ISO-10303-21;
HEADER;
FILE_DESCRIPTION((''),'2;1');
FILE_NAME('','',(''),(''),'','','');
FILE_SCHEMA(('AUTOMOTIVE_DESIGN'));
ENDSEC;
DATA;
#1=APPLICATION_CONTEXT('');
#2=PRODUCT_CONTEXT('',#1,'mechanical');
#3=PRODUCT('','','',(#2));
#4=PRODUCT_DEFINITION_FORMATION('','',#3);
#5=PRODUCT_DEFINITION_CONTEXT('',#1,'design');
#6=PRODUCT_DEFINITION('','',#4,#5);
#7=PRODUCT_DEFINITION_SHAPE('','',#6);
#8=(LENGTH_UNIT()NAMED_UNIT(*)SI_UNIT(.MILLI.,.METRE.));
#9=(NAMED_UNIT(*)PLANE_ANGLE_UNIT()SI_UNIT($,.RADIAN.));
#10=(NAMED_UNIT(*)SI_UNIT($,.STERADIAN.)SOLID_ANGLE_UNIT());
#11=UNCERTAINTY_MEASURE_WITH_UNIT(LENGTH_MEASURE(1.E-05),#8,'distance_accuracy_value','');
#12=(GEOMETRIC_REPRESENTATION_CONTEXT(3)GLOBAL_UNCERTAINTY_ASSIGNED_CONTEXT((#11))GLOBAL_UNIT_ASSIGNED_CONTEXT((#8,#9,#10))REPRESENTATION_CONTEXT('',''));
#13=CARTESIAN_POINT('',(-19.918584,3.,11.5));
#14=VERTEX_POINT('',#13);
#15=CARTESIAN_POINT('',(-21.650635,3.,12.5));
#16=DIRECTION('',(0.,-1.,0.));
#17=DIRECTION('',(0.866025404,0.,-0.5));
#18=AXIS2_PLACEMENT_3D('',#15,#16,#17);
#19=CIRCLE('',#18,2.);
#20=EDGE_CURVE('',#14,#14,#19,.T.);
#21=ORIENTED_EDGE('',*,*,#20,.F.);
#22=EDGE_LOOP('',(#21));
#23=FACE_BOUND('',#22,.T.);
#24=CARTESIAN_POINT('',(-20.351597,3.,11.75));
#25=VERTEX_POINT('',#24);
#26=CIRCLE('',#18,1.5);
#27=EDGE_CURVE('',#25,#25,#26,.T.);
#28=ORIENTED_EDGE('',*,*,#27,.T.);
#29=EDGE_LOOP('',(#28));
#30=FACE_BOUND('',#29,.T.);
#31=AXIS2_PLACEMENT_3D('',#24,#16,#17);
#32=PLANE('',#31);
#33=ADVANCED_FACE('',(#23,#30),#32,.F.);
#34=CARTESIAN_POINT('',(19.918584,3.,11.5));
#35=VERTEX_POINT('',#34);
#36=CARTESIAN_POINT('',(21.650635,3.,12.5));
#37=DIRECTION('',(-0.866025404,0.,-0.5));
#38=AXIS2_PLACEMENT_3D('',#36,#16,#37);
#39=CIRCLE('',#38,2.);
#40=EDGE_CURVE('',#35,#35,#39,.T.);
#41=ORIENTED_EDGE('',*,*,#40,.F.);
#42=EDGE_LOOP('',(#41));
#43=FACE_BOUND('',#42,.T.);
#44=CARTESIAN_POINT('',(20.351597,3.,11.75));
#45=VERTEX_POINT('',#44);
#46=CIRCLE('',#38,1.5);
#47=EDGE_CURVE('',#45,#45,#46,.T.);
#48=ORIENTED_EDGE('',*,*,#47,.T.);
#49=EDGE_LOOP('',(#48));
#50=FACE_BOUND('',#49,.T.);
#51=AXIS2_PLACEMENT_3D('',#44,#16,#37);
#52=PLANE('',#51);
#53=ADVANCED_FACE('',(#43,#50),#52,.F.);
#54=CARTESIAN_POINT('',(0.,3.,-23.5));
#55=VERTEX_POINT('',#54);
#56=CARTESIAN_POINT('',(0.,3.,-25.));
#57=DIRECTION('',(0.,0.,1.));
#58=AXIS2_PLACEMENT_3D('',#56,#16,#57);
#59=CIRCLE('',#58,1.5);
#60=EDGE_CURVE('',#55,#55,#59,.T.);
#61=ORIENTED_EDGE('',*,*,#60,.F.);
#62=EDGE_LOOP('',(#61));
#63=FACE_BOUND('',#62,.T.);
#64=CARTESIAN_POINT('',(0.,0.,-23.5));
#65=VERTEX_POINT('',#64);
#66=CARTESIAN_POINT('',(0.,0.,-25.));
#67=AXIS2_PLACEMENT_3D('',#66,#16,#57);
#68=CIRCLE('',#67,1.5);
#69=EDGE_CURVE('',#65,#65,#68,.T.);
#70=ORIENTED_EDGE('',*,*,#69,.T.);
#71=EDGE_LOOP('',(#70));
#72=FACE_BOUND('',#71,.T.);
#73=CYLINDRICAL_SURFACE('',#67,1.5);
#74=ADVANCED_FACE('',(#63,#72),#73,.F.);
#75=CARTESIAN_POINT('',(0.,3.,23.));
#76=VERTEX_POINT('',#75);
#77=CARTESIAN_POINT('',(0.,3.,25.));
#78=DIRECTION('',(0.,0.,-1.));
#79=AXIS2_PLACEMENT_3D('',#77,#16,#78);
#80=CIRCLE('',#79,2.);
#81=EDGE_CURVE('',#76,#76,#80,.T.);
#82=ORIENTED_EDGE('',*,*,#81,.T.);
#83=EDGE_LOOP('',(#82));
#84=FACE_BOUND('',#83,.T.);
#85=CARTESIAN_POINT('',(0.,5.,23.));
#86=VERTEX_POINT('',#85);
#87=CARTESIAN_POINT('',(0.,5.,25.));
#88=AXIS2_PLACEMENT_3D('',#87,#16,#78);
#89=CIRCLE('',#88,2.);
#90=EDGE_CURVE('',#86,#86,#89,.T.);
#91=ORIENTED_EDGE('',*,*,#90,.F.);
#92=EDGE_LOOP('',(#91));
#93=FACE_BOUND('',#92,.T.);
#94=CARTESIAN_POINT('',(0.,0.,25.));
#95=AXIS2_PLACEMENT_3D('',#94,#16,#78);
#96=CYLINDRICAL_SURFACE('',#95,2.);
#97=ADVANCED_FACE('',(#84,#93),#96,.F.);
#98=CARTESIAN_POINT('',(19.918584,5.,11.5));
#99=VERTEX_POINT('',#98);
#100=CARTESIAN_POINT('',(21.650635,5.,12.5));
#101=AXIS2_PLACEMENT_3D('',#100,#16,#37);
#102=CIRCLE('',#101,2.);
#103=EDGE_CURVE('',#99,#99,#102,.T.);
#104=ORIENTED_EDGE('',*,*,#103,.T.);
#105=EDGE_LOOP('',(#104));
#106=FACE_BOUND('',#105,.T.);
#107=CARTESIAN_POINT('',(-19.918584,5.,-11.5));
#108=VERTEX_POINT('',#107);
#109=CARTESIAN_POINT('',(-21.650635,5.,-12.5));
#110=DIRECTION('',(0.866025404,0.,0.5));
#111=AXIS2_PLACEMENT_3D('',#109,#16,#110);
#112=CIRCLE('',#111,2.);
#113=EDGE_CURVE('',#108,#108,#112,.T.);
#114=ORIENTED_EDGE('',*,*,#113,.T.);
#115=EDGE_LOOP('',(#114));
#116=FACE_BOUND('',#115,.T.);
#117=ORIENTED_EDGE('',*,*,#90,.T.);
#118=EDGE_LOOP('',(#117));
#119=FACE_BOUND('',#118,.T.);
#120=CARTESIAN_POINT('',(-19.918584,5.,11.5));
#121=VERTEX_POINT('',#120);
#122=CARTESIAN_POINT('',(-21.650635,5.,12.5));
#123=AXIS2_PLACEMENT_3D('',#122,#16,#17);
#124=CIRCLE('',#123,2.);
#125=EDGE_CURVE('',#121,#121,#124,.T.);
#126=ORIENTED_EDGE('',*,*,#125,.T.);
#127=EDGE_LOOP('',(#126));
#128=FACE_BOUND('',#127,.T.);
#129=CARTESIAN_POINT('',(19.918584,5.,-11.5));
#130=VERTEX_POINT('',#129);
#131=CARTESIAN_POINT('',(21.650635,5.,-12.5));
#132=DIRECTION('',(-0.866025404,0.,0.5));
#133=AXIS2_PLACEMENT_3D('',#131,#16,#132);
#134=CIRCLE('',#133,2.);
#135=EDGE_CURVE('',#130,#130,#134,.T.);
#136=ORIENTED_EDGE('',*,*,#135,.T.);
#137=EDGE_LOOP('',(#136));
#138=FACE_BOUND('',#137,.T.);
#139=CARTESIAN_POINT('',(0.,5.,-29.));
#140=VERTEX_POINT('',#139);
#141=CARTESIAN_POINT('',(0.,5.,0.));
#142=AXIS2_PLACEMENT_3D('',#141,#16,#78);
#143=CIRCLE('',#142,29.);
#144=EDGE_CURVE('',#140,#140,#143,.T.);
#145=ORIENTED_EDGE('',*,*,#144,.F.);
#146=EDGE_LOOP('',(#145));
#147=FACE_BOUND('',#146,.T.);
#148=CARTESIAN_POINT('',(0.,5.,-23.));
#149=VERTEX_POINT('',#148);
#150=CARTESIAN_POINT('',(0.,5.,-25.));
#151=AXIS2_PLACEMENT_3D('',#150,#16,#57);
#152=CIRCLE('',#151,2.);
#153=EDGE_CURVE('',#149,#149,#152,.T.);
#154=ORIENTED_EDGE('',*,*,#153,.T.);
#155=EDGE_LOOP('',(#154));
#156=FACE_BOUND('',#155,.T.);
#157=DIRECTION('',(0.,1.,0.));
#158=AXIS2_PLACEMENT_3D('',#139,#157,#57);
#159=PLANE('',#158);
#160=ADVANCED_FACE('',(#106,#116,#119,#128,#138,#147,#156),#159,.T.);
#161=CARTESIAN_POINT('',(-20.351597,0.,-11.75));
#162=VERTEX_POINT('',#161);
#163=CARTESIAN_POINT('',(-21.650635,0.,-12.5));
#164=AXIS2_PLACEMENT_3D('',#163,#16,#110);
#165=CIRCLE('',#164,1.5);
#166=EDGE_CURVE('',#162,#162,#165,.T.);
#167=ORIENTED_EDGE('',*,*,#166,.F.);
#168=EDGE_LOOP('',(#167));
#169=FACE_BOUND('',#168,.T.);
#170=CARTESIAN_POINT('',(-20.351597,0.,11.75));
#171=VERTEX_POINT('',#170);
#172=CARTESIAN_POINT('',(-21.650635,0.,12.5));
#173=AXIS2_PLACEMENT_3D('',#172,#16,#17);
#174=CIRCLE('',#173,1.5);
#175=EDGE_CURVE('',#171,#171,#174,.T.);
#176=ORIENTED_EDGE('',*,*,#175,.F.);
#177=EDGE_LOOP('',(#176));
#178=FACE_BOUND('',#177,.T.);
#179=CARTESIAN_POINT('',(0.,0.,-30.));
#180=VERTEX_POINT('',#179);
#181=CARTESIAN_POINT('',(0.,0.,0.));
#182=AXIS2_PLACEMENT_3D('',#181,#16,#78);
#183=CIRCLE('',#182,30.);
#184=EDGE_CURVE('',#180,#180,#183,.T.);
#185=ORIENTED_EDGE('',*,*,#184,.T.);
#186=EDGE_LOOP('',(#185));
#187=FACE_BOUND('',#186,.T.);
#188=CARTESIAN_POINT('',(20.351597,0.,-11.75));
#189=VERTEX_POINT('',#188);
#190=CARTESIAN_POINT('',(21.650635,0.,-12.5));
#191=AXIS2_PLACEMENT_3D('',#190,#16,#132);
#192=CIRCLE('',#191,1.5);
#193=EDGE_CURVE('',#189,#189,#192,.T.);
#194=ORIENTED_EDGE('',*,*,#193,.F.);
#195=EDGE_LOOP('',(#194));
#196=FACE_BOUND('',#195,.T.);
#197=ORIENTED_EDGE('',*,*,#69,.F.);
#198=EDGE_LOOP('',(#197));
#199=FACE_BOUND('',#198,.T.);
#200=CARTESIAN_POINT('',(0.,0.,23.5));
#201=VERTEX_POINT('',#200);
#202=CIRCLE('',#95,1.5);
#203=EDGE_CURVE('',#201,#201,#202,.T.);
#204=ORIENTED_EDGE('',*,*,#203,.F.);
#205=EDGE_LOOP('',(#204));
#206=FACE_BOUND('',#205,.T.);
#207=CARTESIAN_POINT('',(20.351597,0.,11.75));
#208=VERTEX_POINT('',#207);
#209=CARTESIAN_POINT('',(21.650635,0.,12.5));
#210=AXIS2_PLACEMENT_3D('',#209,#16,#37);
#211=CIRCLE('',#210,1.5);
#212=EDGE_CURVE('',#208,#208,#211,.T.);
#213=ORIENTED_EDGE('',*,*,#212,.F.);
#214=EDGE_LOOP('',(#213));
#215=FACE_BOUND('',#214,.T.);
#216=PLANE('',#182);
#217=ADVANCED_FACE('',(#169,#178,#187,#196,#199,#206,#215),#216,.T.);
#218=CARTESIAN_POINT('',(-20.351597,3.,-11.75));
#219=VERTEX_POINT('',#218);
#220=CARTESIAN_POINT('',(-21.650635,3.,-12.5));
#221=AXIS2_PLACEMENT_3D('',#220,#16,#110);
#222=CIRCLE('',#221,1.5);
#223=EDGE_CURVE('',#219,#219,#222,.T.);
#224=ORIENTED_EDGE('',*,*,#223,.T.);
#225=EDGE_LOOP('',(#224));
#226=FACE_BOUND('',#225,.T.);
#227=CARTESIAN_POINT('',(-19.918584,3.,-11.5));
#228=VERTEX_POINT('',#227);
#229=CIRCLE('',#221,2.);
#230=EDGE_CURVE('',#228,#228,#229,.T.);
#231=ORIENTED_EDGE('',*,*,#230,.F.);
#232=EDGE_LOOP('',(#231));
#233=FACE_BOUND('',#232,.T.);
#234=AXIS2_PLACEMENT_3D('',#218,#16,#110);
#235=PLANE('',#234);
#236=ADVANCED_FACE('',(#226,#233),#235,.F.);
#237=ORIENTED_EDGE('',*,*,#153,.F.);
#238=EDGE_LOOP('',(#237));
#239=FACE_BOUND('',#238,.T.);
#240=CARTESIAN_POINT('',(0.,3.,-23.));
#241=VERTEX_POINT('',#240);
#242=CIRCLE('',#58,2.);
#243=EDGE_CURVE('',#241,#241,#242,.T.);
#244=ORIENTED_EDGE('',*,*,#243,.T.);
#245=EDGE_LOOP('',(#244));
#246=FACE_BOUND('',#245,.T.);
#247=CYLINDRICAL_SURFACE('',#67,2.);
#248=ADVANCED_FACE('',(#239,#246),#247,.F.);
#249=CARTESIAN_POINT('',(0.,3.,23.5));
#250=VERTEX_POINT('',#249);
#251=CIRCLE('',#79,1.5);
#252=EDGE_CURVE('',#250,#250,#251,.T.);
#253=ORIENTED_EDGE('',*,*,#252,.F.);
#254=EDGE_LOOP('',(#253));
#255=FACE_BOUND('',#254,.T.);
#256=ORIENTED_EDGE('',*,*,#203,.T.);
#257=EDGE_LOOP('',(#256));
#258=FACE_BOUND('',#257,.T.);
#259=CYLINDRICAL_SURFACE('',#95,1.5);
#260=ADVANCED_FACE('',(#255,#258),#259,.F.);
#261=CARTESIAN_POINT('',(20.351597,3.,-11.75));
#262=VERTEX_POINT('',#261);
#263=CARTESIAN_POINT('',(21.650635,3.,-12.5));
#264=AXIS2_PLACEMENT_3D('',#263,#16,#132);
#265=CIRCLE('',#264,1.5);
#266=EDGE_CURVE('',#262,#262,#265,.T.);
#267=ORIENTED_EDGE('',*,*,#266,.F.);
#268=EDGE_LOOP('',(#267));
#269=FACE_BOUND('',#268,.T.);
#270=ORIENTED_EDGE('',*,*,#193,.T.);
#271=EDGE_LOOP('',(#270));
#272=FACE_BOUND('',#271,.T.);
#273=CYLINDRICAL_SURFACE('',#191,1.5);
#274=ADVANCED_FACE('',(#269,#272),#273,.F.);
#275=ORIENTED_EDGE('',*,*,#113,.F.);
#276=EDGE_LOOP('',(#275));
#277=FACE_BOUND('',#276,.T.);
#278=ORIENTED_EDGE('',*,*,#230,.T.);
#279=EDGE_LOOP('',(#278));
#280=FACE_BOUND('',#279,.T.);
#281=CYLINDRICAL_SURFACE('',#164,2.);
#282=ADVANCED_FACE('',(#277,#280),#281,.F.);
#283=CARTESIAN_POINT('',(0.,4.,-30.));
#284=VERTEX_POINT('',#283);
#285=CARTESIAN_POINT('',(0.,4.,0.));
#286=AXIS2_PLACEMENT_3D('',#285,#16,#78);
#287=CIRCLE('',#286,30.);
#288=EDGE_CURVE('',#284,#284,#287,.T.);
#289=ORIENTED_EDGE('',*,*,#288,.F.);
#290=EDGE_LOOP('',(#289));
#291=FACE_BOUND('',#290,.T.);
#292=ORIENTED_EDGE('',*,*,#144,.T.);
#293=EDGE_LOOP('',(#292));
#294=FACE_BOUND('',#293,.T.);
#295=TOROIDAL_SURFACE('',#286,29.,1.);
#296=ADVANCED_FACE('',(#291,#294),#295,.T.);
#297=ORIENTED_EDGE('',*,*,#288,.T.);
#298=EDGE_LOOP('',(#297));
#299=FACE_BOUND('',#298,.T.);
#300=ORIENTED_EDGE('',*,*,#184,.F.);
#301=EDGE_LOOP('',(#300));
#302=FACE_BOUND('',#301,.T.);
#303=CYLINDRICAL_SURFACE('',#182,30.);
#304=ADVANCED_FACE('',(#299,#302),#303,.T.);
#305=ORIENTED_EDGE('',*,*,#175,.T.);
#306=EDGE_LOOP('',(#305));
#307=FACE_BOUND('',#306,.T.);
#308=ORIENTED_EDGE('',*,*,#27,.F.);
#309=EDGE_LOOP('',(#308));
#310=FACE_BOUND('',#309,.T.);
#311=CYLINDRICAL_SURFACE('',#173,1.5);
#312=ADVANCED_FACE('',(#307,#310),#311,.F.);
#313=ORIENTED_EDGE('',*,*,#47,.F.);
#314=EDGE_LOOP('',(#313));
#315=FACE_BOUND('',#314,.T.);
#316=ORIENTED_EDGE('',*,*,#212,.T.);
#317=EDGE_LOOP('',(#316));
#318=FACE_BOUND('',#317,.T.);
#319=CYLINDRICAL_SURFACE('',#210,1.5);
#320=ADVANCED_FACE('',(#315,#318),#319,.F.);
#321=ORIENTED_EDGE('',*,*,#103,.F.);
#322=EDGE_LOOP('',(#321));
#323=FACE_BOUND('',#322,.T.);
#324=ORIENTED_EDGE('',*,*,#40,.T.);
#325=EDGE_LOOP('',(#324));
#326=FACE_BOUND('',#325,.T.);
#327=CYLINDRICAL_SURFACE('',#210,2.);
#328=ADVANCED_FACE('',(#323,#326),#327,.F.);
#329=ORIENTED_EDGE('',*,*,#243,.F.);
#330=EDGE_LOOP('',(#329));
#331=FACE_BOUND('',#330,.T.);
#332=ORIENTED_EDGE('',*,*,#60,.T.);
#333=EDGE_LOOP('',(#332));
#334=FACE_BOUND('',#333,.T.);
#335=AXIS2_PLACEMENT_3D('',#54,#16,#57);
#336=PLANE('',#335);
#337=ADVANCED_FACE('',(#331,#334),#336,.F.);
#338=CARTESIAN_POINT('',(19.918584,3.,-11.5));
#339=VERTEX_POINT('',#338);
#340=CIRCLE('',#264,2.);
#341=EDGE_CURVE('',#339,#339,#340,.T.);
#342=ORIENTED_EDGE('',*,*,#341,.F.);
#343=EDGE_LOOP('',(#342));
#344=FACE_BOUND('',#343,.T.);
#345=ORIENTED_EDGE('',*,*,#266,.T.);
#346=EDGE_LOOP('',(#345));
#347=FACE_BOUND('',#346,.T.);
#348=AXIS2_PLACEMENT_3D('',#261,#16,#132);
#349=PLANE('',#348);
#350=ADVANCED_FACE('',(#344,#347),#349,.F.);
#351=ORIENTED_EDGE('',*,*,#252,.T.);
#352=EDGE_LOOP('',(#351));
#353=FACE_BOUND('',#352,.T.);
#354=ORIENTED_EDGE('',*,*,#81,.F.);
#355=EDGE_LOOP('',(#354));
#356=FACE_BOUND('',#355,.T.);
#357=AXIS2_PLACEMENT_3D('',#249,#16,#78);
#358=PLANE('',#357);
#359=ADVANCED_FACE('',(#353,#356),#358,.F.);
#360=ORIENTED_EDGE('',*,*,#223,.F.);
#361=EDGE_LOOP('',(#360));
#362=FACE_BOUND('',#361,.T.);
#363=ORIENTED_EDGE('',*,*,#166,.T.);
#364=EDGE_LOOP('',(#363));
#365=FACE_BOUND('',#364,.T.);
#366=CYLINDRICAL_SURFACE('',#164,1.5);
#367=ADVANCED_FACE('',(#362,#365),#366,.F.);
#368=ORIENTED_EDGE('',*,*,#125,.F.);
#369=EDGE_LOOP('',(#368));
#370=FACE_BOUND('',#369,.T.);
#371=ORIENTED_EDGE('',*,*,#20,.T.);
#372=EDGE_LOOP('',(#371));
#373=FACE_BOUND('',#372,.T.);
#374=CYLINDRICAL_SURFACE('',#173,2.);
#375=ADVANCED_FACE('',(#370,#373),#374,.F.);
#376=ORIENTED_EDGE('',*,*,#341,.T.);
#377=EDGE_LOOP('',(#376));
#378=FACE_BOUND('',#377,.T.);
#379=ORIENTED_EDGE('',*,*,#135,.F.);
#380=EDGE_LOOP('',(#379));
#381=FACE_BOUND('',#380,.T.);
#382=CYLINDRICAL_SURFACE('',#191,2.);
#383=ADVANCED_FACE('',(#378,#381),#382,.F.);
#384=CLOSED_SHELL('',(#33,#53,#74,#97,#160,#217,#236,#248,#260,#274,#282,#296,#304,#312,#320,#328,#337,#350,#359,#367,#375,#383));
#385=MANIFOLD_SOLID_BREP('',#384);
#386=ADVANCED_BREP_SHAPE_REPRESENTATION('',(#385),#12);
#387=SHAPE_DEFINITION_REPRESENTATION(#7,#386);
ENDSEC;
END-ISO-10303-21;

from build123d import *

# Parameters (mm, degrees)
PATTERN_CIRCULAR_1_OUTLINE_R     = 1.5
PATTERN_CIRCULAR_1_DEPTH         = 5
PATTERN_START                    = 3
PATTERN_CIRCULAR_1_2_OUTLINE_R   = 2
PATTERN_CIRCULAR_1_2_OUTLINE_R_2 = 1.5
PATTERN_CIRCULAR_1_2_DEPTH       = 2


# Read off the part's stored shape, not the designer's step: Круговой массив1
with BuildPart() as part:
    # Эскиз1 → Повернуть1 (revolve)
    with BuildSketch(Plane(origin=(0, 0, 0), x_dir=(0, 0, -1), z_dir=(1, 0, 0))):
        with BuildLine():
            Line((0, 0), (30, 0))
            Line((30, 0), (30, 4))
            ThreePointArc((30, 4), (29.707106781, 4.707106781), (29, 5))
            Line((29, 5), (0, 5))
            Line((0, 5), (0, 0))
        make_face()
    revolve(axis=Axis((0, 0, 0), (0, 1, 0)))

    # Эскиз2 → Вырез-Повернуть1 (revolve, cut)
    with BuildSketch(Plane(origin=(0, 0, 0), x_dir=(0, 0, -1), z_dir=(1, 0, 0))):
        Polygon((-25, 0), (-23.5, 0), (-23.5, 3), (-23, 3), (-23, 5), (-25, 5), align=None)
    revolve(axis=Axis((0, 0, 25), (0, 1, 0)), mode=Mode.SUBTRACT)

    # Круговой массив1 outline → Круговой массив1 (cut)
    with BuildSketch(Plane(origin=(0, 0, 0), x_dir=(1, 0, 0), z_dir=(0, 1, 0))):
        with Locations((-21.650635095, -12.5)):
            Circle(PATTERN_CIRCULAR_1_OUTLINE_R)
        with Locations((-21.650635095, 12.5)):
            Circle(PATTERN_CIRCULAR_1_OUTLINE_R)
        with Locations((0, 25)):
            Circle(PATTERN_CIRCULAR_1_OUTLINE_R)
        with Locations((21.650635095, 12.5)):
            Circle(PATTERN_CIRCULAR_1_OUTLINE_R)
        with Locations((21.650635095, -12.5)):
            Circle(PATTERN_CIRCULAR_1_OUTLINE_R)
    extrude(amount=PATTERN_CIRCULAR_1_DEPTH, mode=Mode.SUBTRACT)

    # Pattern Circular 1 2 outline → Pattern Circular 1 2 (cut)
    # profile 1 of 5: a face of its own
    with BuildSketch(Plane(origin=(0, 0, 0), x_dir=(1, 0, 0), z_dir=(0, 1, 0)).offset(PATTERN_START)):
        with Locations((-21.650635095, -12.5)):
            Circle(PATTERN_CIRCULAR_1_2_OUTLINE_R)
        with Locations((-21.650635095, -12.5)):
            Circle(PATTERN_CIRCULAR_1_2_OUTLINE_R_2, mode=Mode.SUBTRACT)
    # profile 2 of 5: a face of its own
    with BuildSketch(Plane(origin=(0, 0, 0), x_dir=(1, 0, 0), z_dir=(0, 1, 0)).offset(PATTERN_START)):
        with Locations((-21.650635095, 12.5)):
            Circle(PATTERN_CIRCULAR_1_2_OUTLINE_R)
        with Locations((-21.650635095, 12.5)):
            Circle(PATTERN_CIRCULAR_1_2_OUTLINE_R_2, mode=Mode.SUBTRACT)
    # profile 3 of 5: a face of its own
    with BuildSketch(Plane(origin=(0, 0, 0), x_dir=(1, 0, 0), z_dir=(0, 1, 0)).offset(PATTERN_START)):
        with Locations((0, 25)):
            Circle(PATTERN_CIRCULAR_1_2_OUTLINE_R)
        with Locations((0, 25)):
            Circle(PATTERN_CIRCULAR_1_2_OUTLINE_R_2, mode=Mode.SUBTRACT)
    # profile 4 of 5: a face of its own
    with BuildSketch(Plane(origin=(0, 0, 0), x_dir=(1, 0, 0), z_dir=(0, 1, 0)).offset(PATTERN_START)):
        with Locations((21.650635095, 12.5)):
            Circle(PATTERN_CIRCULAR_1_2_OUTLINE_R)
        with Locations((21.650635095, 12.5)):
            Circle(PATTERN_CIRCULAR_1_2_OUTLINE_R_2, mode=Mode.SUBTRACT)
    # profile 5 of 5: a face of its own
    with BuildSketch(Plane(origin=(0, 0, 0), x_dir=(1, 0, 0), z_dir=(0, 1, 0)).offset(PATTERN_START)):
        with Locations((21.650635095, -12.5)):
            Circle(PATTERN_CIRCULAR_1_2_OUTLINE_R)
        with Locations((21.650635095, -12.5)):
            Circle(PATTERN_CIRCULAR_1_2_OUTLINE_R_2, mode=Mode.SUBTRACT)
    extrude(amount=PATTERN_CIRCULAR_1_2_DEPTH, mode=Mode.SUBTRACT)


solid = part.part
